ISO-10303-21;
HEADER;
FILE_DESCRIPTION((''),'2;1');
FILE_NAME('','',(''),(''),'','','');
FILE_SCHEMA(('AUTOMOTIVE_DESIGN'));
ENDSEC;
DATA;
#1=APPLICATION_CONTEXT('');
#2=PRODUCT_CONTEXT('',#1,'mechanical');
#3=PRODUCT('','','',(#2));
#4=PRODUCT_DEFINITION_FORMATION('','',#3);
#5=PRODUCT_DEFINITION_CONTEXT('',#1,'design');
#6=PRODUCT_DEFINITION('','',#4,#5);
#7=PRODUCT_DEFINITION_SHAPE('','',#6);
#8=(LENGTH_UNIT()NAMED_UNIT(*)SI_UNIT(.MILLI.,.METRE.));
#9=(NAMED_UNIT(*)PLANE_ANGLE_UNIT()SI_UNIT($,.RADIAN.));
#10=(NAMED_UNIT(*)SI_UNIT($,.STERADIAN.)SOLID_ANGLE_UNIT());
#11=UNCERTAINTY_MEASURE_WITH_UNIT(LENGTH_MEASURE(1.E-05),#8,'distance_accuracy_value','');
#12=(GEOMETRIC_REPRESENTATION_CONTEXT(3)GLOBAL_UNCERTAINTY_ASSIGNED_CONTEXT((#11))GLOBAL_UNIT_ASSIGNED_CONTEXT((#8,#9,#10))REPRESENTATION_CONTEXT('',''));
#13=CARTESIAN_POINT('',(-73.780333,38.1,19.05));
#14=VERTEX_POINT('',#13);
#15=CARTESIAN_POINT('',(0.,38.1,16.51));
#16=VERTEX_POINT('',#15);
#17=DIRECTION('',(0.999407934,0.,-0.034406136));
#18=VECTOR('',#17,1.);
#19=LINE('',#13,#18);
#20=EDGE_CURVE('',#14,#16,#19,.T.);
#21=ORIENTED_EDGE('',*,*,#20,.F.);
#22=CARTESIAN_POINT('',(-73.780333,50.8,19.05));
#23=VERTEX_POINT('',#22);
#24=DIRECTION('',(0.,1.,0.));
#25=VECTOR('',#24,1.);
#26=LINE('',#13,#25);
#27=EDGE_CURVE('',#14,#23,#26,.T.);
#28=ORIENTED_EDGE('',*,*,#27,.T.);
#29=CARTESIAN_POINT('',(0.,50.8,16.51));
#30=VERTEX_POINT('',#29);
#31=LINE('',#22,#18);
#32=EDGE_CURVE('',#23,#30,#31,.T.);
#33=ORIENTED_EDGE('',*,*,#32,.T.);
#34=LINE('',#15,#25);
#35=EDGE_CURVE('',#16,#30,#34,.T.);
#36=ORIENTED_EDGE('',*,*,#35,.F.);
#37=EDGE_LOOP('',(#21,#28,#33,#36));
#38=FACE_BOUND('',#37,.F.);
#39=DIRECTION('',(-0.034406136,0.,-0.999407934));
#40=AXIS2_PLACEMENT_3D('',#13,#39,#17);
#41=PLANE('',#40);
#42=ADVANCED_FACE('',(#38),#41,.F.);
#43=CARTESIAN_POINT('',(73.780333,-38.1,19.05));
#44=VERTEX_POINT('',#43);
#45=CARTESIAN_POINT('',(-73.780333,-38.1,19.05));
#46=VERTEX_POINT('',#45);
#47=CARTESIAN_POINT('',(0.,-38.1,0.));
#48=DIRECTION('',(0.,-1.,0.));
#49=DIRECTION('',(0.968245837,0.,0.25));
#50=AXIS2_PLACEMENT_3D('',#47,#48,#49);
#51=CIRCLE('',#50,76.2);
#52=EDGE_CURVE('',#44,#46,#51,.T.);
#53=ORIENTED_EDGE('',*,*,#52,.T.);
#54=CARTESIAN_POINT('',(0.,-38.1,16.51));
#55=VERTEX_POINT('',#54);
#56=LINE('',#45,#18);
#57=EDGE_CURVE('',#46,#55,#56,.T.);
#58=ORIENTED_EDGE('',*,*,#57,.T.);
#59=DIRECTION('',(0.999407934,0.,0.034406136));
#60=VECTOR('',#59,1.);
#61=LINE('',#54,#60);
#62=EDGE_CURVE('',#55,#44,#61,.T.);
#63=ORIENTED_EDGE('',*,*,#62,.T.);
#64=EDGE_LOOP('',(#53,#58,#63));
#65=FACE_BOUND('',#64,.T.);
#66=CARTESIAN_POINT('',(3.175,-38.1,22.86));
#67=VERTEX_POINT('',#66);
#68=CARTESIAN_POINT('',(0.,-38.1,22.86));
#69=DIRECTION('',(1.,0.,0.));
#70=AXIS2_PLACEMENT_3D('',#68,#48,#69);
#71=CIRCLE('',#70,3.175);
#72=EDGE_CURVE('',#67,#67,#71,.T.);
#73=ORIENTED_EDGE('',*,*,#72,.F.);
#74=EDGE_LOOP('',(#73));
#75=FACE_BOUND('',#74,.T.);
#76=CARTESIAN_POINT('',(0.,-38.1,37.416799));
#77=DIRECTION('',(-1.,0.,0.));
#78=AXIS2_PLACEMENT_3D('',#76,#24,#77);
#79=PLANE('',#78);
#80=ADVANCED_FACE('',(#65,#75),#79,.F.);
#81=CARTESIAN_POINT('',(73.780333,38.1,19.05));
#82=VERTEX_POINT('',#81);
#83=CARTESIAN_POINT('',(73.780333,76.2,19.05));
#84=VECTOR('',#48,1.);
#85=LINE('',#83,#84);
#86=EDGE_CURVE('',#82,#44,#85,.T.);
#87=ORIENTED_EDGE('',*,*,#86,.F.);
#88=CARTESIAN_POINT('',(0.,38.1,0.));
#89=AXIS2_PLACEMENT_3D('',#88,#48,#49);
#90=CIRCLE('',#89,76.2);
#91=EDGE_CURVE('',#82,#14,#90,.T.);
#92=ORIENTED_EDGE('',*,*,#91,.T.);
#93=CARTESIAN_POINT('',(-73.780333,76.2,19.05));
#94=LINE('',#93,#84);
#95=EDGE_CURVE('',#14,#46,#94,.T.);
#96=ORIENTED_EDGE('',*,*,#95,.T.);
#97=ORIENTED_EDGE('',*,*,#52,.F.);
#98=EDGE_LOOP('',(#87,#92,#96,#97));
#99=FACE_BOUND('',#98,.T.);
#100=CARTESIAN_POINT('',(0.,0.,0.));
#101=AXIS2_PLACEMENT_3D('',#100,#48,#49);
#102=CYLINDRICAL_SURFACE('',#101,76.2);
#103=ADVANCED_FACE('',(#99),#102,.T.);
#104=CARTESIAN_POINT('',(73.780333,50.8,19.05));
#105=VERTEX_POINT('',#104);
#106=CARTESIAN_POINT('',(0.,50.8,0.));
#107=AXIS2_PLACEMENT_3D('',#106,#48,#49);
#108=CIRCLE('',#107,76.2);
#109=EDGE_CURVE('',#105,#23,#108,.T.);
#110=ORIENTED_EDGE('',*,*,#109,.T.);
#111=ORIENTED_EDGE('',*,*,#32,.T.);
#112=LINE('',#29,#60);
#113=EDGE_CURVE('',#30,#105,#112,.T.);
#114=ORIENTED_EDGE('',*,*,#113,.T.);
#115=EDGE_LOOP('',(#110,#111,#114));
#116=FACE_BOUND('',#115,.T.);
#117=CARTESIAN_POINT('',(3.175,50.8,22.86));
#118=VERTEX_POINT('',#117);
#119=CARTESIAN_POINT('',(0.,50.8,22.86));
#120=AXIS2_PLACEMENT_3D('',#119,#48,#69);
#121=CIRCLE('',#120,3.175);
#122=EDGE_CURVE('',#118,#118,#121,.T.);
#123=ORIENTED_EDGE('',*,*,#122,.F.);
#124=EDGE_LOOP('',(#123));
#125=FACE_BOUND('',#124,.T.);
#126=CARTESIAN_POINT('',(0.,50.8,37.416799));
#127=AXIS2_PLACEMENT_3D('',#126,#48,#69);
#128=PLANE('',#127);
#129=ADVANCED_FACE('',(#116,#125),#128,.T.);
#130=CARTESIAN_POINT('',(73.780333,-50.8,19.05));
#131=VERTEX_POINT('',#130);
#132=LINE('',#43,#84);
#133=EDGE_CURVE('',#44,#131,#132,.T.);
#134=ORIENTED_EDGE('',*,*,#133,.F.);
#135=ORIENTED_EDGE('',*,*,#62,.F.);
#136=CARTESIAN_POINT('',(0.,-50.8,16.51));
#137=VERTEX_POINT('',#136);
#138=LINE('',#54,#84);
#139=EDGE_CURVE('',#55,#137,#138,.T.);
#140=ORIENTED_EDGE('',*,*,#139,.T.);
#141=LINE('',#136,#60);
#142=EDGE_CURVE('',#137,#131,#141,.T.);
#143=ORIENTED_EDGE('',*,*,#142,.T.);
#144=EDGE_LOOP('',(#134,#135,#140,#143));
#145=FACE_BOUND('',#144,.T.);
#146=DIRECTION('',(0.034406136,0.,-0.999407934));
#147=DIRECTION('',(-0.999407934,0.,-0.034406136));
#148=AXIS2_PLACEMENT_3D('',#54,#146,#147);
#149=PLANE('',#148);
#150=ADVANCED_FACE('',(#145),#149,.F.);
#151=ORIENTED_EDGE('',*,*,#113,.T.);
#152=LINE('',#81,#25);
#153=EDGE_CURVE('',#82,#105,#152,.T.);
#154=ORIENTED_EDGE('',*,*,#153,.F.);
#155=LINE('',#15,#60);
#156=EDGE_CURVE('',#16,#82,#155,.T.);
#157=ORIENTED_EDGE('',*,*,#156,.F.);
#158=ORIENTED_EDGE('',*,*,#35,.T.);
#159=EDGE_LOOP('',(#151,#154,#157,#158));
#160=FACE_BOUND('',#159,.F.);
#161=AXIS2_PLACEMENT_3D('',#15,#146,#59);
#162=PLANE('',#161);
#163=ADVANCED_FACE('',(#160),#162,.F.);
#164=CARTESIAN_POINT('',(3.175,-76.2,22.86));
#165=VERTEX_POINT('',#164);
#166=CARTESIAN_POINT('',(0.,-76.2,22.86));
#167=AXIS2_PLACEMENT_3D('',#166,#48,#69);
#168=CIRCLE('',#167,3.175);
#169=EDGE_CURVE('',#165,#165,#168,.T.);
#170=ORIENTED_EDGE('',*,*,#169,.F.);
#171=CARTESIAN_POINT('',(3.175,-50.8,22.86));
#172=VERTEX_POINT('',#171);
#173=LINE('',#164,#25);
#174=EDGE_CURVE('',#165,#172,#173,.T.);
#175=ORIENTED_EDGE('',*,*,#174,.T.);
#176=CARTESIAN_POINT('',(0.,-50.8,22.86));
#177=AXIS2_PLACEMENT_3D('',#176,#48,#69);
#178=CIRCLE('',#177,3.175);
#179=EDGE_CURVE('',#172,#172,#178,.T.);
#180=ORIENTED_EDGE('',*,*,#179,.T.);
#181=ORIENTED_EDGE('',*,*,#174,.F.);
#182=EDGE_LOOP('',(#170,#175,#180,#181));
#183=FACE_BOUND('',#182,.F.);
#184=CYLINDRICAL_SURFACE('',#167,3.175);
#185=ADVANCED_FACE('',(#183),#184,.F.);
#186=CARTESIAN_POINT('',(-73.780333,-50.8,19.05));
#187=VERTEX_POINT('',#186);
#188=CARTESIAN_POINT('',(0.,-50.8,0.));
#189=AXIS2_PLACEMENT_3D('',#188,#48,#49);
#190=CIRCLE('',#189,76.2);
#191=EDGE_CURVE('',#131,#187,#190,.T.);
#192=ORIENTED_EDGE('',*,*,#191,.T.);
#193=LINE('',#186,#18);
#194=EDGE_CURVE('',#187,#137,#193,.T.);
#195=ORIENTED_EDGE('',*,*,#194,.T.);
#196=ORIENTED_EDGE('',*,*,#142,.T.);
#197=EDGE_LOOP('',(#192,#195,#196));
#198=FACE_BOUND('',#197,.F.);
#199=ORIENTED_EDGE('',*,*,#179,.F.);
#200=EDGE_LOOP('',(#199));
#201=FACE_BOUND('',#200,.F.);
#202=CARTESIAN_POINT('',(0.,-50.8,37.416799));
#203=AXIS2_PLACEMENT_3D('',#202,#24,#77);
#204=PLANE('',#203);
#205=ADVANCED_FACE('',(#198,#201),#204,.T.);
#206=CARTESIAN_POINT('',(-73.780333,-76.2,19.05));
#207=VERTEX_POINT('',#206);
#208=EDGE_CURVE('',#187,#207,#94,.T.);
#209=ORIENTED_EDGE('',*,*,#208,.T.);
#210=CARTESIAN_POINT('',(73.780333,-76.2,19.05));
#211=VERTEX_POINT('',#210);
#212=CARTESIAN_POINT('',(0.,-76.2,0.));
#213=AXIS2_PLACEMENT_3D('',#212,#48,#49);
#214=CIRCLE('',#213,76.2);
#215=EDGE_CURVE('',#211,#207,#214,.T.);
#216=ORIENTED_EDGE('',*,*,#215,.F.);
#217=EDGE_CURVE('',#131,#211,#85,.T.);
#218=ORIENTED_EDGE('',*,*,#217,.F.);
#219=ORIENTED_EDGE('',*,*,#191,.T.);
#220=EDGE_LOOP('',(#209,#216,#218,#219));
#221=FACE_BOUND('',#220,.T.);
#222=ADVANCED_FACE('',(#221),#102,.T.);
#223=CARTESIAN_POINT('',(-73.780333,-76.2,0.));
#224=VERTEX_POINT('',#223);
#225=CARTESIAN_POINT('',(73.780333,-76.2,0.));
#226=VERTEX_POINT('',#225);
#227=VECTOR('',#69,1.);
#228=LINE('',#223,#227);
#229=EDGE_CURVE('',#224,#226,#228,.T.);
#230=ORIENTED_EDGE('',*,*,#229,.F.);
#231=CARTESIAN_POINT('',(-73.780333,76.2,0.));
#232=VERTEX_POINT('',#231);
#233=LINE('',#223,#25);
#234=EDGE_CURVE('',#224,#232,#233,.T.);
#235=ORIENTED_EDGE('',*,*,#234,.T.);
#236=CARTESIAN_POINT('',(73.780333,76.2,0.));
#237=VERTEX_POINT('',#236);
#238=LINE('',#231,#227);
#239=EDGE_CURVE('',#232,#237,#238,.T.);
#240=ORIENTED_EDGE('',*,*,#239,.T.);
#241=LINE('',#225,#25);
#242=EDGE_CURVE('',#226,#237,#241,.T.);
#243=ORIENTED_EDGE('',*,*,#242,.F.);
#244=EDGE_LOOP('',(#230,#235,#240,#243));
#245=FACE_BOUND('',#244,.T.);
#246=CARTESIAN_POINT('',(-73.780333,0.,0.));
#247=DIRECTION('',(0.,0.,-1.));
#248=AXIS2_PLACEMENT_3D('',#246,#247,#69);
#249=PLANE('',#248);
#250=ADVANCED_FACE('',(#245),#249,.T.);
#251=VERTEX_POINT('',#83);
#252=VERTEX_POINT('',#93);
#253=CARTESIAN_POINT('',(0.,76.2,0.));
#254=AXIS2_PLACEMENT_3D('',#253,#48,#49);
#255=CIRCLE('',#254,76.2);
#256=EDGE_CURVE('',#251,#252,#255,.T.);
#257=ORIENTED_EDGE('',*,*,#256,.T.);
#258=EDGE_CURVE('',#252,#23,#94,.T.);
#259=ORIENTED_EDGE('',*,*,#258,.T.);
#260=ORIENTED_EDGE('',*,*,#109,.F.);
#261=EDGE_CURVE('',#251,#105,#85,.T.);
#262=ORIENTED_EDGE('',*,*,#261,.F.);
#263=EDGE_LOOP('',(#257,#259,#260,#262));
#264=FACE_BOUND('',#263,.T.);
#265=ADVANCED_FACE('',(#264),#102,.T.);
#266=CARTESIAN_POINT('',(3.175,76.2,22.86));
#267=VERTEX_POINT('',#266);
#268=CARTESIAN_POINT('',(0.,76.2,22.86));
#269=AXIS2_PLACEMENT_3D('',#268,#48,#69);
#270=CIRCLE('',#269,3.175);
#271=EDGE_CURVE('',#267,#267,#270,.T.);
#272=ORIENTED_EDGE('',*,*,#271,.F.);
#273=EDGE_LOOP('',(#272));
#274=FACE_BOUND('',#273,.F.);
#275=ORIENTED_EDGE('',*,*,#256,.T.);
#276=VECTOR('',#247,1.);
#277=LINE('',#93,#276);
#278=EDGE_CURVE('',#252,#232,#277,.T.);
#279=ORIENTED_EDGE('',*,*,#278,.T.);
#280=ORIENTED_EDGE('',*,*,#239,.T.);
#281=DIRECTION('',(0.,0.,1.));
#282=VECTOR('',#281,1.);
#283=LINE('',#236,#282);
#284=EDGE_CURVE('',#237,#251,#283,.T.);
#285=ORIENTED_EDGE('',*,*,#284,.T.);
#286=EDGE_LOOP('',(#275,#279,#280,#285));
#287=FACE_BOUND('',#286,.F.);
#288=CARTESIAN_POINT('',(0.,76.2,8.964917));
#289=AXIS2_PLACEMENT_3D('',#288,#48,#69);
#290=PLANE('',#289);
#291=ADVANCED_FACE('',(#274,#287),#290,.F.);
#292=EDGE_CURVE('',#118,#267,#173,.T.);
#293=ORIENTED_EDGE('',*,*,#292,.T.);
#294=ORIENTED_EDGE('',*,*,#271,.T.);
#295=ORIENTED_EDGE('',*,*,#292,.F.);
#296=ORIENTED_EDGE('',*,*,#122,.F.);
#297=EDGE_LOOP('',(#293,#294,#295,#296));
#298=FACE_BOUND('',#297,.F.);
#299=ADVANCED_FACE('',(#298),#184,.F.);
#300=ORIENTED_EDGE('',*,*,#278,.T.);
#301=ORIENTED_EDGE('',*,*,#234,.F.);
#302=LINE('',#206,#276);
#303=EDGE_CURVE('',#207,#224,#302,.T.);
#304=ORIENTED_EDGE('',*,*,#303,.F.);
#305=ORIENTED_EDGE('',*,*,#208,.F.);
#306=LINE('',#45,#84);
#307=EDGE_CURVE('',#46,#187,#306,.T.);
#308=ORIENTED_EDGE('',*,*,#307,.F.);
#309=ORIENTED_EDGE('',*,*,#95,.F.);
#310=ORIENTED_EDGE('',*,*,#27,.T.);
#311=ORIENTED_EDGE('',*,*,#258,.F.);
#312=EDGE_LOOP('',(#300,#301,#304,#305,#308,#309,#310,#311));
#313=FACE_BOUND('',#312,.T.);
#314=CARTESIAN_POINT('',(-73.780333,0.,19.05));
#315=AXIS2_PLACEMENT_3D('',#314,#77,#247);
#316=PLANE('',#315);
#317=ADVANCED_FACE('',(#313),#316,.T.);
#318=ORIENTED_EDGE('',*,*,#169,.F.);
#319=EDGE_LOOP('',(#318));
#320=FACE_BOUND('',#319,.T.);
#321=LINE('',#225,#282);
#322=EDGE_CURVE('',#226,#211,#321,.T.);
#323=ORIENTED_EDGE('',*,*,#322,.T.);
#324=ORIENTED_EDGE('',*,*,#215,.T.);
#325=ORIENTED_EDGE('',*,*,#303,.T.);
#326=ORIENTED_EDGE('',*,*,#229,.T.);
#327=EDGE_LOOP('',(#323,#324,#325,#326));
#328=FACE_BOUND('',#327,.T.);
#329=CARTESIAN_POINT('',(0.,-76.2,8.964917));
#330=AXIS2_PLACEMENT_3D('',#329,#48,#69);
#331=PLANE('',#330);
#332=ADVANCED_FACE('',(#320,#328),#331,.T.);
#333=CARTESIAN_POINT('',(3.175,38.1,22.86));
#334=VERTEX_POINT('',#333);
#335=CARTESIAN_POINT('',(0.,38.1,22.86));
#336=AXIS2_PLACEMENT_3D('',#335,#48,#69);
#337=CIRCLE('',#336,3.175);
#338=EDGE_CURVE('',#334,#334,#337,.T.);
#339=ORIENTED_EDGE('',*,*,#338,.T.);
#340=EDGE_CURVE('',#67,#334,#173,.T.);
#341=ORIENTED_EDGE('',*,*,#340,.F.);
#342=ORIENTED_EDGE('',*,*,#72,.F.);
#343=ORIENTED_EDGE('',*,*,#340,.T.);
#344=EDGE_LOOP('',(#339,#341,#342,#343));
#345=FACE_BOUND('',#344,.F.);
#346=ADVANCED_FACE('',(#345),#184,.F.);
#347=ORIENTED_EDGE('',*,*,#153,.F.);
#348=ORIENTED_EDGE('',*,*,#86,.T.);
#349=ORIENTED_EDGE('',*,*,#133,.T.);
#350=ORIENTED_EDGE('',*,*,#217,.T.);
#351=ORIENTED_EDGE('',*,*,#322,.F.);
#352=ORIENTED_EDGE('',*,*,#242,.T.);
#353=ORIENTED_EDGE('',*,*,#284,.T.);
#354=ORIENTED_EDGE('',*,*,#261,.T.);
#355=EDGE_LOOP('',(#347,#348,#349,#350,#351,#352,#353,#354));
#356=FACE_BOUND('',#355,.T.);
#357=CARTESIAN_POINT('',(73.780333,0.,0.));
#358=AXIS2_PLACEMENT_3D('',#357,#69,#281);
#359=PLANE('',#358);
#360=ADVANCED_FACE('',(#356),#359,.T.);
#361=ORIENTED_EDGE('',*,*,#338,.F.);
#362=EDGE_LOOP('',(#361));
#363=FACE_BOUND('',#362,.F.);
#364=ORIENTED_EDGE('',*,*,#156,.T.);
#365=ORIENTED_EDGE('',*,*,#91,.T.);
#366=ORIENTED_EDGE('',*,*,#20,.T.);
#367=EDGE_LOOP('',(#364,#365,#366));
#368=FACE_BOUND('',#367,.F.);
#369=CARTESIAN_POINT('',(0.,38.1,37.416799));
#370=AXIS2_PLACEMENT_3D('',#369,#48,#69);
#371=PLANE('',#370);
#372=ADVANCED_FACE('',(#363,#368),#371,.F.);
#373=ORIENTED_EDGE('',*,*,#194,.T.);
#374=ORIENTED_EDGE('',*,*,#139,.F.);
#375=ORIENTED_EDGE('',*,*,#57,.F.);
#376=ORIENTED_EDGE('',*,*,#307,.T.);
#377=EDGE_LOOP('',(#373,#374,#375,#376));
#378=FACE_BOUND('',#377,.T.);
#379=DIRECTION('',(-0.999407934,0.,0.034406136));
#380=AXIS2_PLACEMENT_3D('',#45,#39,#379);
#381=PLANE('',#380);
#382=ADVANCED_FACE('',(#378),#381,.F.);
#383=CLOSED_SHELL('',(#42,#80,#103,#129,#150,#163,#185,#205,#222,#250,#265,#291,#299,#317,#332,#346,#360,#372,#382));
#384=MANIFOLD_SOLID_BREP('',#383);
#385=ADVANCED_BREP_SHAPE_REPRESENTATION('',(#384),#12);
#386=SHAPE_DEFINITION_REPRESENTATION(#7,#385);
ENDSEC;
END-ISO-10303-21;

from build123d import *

# Parameters (mm, degrees)
F1_DEPTH = 76.2
F2_START = -38.1
F2_DEPTH = 12.7
F3_R     = 3.175
F4_DEPTH = 152.4


# Not quite as in the source:
# - a pattern or mirror of a feature is missing from the dataset's text; its kind, count and spacing are read off the source's solid


with BuildPart() as f1:
    # F0 (on Front) → F1 (new body, symmetric)
    with BuildSketch(Plane.XZ):
        Polygon((73.7803327453, 0), (73.7803327453, 19.05), (0, 16.51), (-73.7803327453, 19.05), (-73.7803327453, 0), align=None)
        with BuildLine():
            Line((0, 16.51), (73.7803327453, 19.05))
            ThreePointArc((73.7803327453, 19.05), (0, 76.2), (-73.7803327453, 19.05))
            Line((-73.7803327453, 19.05), (0, 16.51))
        make_face()
    extrude(amount=F1_DEPTH, both=True)

    # F0 (on Front) → F2 (cut)
    with BuildSketch(Plane.XZ.offset(F2_START)):
        with BuildLine():
            Line((0, 16.51), (73.7803327453, 19.05))
            ThreePointArc((73.7803327453, 19.05), (0, 76.2), (-73.7803327453, 19.05))
            Line((-73.7803327453, 19.05), (0, 16.51))
        make_face()
    f2 = extrude(amount=-F2_DEPTH, mode=Mode.SUBTRACT)

    # F2_copies: F2 across plane
    add(f2.mirror(Plane(origin=(0, 0, 0), x_dir=(0, 0, -1), z_dir=(0, -1, 0))), mode=Mode.SUBTRACT)

    # F3 (on face) → F4 (cut)
    with BuildSketch(Plane.XZ.offset(76.2)):
        with Locations((0, 22.86)):
            Circle(F3_R)
    extrude(amount=-F4_DEPTH, mode=Mode.SUBTRACT)


solid = f1.part
